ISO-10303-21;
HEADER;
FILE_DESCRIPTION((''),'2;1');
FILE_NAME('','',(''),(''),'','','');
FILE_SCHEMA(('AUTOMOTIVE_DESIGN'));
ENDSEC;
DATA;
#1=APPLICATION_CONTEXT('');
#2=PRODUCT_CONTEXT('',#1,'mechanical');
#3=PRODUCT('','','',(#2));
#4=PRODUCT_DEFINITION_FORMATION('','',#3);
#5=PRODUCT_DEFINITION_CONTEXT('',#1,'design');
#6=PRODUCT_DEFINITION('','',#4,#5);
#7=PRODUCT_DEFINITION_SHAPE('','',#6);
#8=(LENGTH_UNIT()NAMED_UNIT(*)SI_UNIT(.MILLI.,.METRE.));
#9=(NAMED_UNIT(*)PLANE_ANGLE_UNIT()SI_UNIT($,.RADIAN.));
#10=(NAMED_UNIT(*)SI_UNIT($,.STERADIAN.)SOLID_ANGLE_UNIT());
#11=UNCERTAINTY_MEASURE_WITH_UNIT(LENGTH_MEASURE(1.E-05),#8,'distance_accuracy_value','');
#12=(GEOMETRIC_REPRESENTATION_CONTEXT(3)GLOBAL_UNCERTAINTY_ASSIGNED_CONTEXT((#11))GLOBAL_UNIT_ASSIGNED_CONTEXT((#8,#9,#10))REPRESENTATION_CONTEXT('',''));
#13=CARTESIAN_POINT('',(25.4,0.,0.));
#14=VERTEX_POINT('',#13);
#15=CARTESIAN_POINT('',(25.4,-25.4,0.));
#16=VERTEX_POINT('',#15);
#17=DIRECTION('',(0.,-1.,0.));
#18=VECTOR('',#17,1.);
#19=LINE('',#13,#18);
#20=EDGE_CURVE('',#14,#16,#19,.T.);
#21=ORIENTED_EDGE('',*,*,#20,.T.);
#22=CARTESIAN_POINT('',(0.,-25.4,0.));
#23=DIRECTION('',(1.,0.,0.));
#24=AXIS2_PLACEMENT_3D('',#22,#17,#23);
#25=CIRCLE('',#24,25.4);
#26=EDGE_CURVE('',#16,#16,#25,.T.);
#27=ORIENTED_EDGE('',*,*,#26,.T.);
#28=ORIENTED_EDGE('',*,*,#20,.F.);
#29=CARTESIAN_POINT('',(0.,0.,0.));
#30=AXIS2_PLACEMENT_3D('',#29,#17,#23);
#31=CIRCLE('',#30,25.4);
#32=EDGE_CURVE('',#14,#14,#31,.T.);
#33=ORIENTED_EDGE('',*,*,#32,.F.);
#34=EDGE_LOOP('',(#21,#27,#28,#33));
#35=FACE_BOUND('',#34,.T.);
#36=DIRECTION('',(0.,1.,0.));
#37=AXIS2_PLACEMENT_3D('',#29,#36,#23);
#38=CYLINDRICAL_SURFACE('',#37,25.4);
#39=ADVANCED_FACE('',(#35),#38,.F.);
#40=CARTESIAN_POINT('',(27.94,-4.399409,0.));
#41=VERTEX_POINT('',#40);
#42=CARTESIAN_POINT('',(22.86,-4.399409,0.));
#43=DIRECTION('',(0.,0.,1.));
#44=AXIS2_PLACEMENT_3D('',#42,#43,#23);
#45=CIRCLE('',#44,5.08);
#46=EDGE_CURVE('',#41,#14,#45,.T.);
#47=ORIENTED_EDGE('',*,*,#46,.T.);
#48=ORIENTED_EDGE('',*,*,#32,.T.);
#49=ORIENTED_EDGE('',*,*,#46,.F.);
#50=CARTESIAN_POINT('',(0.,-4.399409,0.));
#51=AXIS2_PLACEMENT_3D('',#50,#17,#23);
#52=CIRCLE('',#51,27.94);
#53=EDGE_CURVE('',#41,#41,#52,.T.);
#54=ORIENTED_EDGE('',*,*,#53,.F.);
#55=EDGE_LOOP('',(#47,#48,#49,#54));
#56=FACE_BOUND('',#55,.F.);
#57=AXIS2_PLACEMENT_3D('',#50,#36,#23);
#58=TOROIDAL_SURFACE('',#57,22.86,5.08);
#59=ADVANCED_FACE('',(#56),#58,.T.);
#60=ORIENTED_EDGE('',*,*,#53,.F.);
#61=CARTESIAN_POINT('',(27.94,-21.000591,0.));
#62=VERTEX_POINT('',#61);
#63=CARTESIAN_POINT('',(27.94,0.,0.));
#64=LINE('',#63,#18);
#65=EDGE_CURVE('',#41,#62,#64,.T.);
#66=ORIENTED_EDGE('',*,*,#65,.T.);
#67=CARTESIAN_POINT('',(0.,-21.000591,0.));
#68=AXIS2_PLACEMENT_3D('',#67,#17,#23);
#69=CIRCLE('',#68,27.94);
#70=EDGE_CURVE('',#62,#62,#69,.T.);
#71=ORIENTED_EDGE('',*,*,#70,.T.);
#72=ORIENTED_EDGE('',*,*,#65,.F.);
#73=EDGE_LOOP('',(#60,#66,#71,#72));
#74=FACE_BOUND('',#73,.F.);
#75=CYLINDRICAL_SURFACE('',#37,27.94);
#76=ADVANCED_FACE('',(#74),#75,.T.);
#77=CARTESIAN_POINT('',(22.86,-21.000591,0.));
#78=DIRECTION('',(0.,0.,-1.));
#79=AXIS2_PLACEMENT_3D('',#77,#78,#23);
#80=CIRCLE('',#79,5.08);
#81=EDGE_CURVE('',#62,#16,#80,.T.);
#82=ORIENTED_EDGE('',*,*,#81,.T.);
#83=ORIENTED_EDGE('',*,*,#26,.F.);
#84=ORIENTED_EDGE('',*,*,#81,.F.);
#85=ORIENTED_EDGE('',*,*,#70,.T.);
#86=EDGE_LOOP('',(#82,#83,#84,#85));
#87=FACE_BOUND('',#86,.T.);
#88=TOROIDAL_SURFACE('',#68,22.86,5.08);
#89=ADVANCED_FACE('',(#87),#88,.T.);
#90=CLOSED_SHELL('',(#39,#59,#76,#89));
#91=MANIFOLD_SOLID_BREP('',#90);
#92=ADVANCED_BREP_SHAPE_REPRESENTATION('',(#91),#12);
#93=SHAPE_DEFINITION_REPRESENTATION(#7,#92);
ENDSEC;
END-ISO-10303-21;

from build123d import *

# Parameters (mm, degrees)
F0_R     = 27.94
F0_R_2   = 25.4
F1_DEPTH = 25.4


# Not quite as in the source:
# - a fillet or chamfer that OpenCascade refuses, or shapes differently, is made with other operations: its cross-section is extruded or revolved along the edge and cut away or added


with BuildPart() as f1:
    # F0 (on Front) → F1 (new body)
    with BuildSketch(Plane.XZ):
        Circle(F0_R)
        Circle(F0_R_2, mode=Mode.SUBTRACT)
    extrude(amount=F1_DEPTH)

    # F2: fillet of radius 5.08 on 2 edges, made by hand

    # F2_s1 → F2_t2 (revolve, cut)
    with BuildSketch(Plane.XY):
        with BuildLine():
            ThreePointArc((27.94, -4.3994090512), (27.2594090512, -1.8594090512), (25.4, 0))
            Line((25.4, 0), (27.94, 0))
            Line((27.94, 0), (27.94, -4.3994090512))
        make_face()
    revolve(axis=Axis((0, 0, 0), (0, -1, 0)), mode=Mode.SUBTRACT)

    # F2_s3 → F2_t4 (revolve, cut)
    with BuildSketch(Plane.XY):
        with BuildLine():
            ThreePointArc((27.94, -21.0005909488), (27.2594090512, -23.5405909488), (25.4, -25.4))
            Line((25.4, -25.4), (27.94, -25.4))
            Line((27.94, -25.4), (27.94, -21.0005909488))
        make_face()
    revolve(axis=Axis((0, -25.4, 0), (0, -1, 0)), mode=Mode.SUBTRACT)


solid = f1.part
